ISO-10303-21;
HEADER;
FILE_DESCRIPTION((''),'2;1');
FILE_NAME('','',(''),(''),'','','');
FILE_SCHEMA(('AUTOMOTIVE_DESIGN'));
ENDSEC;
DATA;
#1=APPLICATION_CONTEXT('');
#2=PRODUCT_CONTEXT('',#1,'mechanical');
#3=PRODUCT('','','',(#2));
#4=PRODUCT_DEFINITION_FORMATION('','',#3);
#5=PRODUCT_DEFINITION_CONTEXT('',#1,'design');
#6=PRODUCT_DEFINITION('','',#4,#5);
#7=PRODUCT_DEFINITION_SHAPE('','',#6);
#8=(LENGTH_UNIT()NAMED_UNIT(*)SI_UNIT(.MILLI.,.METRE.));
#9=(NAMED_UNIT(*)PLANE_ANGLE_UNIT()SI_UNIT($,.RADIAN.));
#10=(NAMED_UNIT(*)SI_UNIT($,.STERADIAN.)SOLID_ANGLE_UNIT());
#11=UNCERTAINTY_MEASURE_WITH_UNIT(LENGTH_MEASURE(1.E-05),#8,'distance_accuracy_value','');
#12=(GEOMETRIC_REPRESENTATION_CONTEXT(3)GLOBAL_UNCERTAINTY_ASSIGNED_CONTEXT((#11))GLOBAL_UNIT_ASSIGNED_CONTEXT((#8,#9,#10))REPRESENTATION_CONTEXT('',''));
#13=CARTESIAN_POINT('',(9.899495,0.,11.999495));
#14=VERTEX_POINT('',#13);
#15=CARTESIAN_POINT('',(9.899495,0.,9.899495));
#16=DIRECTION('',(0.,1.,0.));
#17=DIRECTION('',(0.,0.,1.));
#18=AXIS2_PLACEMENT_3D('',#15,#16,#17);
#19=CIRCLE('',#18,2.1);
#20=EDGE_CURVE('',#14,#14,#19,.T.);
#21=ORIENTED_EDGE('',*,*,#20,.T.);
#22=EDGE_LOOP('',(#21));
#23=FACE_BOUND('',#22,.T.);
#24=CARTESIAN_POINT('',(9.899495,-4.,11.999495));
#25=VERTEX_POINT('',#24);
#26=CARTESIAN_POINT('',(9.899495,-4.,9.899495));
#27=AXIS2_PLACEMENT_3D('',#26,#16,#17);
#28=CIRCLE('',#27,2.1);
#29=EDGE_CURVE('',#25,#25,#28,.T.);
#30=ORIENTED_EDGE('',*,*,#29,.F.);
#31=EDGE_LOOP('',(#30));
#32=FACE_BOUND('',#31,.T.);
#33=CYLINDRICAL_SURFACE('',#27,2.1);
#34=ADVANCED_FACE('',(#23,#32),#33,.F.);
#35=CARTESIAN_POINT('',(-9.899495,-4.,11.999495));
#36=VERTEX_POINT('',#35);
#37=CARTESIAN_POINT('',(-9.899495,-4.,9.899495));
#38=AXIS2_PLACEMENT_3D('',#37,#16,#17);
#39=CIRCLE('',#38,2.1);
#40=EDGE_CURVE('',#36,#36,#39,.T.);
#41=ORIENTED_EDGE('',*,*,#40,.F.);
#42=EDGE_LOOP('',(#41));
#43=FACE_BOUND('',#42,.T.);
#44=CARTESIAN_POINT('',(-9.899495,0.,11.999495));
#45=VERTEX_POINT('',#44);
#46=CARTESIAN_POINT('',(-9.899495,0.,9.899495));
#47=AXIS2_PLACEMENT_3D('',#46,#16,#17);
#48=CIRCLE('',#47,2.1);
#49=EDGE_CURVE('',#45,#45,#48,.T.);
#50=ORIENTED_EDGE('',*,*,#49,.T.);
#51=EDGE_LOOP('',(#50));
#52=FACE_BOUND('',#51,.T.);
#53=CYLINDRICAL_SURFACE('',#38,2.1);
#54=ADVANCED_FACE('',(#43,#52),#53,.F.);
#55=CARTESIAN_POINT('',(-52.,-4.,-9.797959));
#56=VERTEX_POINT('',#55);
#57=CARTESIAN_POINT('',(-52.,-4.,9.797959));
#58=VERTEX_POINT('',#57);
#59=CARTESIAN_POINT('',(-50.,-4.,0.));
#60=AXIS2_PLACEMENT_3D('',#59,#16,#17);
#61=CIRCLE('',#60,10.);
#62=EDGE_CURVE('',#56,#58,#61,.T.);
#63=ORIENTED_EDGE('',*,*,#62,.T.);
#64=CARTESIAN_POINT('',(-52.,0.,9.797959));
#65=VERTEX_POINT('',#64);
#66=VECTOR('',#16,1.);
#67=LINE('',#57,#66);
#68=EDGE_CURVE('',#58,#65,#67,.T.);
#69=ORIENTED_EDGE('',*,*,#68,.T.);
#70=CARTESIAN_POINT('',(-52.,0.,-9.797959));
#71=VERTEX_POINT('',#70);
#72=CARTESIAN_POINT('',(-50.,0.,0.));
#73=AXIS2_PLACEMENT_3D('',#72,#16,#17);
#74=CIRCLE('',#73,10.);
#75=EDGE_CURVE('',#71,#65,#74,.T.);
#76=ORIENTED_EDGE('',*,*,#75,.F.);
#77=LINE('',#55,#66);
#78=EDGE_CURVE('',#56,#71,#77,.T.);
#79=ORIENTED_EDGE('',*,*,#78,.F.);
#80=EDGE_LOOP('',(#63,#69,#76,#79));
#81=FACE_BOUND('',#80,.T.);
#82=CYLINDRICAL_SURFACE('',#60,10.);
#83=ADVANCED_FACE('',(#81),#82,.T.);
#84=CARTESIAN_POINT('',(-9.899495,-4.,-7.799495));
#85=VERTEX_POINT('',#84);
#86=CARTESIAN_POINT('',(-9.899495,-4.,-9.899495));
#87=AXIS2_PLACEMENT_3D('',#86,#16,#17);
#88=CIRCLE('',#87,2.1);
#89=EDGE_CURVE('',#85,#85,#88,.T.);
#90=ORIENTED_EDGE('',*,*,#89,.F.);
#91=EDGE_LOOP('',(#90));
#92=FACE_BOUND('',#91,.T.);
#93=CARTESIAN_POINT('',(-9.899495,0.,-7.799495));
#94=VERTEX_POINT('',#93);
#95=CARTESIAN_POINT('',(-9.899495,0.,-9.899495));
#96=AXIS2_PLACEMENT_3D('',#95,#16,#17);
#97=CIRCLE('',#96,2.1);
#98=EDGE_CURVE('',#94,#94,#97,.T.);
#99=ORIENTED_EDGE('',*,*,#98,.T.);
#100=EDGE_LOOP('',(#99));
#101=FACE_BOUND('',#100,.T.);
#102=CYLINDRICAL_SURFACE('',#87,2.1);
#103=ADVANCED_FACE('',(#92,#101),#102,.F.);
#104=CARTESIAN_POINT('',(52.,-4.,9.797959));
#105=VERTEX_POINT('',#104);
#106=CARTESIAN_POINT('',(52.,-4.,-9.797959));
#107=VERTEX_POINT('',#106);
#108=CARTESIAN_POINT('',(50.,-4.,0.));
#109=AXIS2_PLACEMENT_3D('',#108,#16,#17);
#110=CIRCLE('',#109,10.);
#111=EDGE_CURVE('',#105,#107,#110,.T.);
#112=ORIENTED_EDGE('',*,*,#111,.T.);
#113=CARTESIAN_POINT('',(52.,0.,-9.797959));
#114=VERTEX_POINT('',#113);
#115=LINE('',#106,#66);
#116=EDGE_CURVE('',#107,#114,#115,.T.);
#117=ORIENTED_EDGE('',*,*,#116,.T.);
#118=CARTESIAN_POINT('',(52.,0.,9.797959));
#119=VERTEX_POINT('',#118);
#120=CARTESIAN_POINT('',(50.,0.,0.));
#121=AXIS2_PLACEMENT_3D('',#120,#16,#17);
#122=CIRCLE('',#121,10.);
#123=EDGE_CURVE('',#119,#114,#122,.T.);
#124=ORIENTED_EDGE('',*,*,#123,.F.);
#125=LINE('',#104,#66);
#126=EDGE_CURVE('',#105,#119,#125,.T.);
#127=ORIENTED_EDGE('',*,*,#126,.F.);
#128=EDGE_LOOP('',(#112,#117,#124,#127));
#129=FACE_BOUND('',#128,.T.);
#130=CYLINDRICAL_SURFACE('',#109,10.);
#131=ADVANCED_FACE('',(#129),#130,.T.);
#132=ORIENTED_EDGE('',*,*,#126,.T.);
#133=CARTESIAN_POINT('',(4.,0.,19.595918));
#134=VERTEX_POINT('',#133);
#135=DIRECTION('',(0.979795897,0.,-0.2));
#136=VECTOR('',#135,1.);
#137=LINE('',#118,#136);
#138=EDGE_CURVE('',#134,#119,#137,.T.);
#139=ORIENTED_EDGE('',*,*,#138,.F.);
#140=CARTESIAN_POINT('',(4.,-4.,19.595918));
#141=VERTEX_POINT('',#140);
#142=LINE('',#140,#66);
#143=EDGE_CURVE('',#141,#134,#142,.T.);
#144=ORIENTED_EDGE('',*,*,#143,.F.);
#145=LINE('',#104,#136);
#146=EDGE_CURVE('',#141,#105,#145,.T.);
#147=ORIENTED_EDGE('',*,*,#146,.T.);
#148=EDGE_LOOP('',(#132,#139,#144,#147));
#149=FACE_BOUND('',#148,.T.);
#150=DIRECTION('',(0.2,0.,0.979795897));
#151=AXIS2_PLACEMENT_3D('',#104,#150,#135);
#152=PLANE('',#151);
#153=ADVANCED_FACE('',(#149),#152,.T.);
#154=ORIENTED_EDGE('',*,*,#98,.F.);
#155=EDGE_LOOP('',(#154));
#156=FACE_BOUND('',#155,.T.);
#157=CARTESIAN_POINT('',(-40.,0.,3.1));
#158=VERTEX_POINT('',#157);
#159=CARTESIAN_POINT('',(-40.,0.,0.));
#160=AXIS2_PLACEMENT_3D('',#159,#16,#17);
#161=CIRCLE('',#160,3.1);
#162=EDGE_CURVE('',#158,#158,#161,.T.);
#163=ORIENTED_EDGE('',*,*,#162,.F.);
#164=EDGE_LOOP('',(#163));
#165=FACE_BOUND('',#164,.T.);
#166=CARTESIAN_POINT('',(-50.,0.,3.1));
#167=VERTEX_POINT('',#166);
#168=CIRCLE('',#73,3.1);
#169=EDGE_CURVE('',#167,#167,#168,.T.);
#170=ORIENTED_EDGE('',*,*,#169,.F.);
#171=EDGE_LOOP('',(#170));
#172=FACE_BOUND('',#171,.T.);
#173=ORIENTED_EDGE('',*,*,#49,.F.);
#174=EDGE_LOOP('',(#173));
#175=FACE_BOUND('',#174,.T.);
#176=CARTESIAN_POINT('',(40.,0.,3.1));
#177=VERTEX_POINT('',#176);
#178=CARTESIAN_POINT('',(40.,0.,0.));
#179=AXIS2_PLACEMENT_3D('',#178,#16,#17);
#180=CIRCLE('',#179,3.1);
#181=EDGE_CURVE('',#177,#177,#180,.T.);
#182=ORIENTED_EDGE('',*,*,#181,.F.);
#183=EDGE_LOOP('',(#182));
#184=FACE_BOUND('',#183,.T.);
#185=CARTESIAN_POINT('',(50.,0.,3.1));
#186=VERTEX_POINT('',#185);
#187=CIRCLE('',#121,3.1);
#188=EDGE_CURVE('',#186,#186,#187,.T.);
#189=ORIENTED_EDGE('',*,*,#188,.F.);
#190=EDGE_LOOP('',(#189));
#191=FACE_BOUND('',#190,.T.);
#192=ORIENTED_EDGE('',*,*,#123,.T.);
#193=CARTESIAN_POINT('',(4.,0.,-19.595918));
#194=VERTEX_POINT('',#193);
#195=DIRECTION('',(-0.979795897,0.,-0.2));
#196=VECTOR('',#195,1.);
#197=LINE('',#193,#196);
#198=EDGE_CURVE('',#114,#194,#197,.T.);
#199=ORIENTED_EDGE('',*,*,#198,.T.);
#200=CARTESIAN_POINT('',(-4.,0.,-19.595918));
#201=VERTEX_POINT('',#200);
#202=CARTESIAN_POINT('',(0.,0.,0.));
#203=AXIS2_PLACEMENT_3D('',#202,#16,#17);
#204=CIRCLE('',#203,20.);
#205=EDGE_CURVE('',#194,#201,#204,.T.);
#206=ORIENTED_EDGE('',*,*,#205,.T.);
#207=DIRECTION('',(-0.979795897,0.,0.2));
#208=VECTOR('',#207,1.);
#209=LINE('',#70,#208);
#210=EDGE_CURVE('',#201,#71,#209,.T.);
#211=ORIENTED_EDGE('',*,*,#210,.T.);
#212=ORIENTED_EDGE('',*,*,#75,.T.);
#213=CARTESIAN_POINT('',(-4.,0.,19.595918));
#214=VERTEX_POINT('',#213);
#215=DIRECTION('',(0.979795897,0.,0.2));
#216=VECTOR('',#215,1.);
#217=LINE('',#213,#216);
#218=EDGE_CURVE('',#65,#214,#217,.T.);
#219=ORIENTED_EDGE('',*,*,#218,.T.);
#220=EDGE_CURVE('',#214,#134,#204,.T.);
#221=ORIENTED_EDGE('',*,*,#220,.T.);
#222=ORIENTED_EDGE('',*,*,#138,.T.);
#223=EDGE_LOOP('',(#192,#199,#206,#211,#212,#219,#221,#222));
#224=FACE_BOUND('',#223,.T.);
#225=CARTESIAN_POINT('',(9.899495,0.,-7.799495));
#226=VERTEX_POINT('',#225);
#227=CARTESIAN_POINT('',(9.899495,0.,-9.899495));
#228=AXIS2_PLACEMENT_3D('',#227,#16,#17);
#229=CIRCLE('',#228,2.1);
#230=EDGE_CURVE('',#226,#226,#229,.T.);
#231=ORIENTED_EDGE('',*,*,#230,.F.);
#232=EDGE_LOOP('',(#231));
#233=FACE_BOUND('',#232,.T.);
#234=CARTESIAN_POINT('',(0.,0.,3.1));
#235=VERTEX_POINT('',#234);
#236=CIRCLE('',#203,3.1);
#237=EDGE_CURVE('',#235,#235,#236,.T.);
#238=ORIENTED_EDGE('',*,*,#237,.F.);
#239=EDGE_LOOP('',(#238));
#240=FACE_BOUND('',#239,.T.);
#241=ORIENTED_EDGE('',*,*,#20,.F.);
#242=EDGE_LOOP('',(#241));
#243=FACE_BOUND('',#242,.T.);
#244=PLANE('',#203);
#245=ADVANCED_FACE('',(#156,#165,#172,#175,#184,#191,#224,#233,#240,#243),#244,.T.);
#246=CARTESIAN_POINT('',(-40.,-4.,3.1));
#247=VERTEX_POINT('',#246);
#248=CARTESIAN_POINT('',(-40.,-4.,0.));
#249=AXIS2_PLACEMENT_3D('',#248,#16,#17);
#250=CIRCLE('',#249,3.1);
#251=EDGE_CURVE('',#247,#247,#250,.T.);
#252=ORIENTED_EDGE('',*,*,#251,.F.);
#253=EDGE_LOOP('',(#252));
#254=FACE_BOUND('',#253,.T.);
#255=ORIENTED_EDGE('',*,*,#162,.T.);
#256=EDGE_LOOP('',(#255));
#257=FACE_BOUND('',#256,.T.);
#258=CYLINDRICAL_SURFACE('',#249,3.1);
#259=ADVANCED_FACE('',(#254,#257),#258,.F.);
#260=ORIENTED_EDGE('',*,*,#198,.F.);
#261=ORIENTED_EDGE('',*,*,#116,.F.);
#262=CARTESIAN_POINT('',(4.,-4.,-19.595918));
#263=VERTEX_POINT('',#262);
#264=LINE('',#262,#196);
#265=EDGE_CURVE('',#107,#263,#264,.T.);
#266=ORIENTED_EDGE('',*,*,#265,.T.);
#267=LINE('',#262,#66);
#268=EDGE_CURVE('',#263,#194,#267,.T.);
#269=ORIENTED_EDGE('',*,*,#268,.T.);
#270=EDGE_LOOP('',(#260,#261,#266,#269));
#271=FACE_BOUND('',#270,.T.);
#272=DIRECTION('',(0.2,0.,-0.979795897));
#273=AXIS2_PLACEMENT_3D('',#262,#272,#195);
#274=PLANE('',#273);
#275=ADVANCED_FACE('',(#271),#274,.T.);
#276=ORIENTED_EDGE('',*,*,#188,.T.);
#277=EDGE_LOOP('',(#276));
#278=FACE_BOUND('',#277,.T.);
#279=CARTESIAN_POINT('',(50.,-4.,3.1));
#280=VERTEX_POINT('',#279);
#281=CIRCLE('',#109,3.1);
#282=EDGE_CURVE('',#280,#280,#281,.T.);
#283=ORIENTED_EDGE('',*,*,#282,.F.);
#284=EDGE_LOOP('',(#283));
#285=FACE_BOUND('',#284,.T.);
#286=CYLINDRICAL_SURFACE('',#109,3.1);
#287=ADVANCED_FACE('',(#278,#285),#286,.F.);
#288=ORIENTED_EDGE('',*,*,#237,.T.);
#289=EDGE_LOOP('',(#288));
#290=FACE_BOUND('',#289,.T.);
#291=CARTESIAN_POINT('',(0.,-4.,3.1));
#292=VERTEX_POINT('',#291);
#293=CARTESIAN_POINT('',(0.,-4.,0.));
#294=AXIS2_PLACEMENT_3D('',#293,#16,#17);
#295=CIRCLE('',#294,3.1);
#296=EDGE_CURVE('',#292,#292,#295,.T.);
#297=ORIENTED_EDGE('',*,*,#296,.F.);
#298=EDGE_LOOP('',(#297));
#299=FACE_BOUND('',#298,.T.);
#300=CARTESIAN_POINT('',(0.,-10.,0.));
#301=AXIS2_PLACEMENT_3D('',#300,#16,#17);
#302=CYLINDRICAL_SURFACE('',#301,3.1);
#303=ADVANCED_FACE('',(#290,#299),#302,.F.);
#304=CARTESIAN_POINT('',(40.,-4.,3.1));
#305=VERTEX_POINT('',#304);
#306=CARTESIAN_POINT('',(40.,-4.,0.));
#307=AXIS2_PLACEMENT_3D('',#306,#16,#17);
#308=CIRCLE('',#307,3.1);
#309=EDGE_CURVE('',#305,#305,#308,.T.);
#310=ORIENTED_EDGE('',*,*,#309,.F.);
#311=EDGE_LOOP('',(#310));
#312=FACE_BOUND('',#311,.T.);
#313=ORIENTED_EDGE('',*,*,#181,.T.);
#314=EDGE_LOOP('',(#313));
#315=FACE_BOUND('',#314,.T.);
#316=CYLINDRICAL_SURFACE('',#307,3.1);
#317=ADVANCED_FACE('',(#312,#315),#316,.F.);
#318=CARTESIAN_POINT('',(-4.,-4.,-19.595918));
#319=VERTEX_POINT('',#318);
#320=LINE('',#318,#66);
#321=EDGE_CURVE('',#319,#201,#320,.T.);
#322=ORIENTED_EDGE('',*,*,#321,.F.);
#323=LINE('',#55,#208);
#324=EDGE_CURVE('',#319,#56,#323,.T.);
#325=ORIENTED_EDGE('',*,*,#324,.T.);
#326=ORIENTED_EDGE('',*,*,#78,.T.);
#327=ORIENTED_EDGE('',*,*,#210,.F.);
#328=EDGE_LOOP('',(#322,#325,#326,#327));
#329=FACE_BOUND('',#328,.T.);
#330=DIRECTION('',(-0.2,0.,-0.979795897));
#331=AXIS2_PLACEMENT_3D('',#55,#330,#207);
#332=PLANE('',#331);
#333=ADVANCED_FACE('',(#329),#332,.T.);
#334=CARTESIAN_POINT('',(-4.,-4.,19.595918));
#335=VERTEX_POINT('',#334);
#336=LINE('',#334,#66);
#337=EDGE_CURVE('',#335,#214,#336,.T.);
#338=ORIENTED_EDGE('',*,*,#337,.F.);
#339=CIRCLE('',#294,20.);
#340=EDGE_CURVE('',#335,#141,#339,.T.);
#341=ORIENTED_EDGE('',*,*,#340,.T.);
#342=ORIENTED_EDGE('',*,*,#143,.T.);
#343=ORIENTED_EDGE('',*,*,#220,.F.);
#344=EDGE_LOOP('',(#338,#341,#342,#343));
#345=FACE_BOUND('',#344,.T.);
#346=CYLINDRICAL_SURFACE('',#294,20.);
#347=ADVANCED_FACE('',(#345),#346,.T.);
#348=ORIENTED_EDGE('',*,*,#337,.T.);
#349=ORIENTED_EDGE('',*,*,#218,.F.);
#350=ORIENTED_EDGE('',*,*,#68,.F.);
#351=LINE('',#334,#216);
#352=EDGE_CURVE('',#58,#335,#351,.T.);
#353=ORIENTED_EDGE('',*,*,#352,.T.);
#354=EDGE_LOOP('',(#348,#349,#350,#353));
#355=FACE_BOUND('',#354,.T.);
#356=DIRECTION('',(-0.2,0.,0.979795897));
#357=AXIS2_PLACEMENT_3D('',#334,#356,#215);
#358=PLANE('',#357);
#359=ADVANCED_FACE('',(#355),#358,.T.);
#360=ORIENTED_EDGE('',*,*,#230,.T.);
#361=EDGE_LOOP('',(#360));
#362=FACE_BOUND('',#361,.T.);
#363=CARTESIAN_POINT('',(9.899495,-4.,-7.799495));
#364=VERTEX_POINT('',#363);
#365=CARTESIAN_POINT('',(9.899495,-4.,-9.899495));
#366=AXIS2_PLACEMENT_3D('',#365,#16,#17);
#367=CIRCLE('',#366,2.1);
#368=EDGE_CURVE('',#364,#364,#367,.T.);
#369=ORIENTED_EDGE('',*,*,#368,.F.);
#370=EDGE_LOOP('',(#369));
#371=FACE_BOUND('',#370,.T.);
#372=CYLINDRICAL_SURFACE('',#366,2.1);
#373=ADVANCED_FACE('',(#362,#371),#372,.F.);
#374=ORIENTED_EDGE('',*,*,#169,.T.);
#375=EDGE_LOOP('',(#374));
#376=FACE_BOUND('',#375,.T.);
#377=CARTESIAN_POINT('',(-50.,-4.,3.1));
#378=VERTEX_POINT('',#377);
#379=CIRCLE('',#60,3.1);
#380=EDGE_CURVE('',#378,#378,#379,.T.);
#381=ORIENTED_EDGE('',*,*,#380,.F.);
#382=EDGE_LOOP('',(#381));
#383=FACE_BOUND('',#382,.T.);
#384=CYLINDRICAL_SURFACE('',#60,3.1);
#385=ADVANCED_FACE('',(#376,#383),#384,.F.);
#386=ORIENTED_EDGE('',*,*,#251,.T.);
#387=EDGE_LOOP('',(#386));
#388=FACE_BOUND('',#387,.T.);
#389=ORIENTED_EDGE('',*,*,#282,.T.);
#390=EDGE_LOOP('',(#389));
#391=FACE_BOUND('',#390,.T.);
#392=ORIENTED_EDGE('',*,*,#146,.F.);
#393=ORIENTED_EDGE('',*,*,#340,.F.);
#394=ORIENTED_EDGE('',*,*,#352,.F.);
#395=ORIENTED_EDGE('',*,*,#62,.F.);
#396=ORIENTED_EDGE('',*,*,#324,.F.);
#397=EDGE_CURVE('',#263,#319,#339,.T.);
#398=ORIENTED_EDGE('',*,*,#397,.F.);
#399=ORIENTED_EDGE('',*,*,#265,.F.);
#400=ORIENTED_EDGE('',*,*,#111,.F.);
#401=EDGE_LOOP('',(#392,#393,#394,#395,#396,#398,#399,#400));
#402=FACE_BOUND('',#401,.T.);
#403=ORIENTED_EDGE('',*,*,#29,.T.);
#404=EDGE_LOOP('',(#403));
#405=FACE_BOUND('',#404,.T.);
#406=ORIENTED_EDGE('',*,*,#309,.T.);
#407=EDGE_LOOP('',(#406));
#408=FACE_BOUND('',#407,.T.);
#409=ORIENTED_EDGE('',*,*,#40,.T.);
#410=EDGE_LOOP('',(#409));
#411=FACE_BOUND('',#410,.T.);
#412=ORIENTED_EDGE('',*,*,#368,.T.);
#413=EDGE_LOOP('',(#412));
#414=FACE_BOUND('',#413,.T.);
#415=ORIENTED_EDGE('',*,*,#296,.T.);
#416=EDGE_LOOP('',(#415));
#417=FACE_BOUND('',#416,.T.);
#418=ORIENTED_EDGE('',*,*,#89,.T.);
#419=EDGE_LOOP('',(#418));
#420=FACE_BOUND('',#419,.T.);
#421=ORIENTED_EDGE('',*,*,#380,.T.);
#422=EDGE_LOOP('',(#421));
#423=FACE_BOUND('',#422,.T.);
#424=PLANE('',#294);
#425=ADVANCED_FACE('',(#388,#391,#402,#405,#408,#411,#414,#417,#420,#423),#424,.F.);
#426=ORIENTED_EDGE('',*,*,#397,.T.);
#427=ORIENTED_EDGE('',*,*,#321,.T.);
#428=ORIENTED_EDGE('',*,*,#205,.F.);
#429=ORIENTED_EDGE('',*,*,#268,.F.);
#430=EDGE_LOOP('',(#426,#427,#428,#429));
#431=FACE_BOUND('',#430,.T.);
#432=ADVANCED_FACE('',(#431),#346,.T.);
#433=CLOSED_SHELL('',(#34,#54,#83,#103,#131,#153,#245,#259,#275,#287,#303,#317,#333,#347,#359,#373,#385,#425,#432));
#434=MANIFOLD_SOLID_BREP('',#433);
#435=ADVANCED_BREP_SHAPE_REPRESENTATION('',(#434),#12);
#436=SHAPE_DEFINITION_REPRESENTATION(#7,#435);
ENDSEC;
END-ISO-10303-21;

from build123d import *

# Parameters (mm, degrees)
SKETCH_1_R             = 2.1
SKETCH_1_R_2           = 3.1
SM_BASE_FLANGE_1_DEPTH = 4
SKETCH_6_R             = 3.1
CUT_EXTRUDE_1_DEPTH    = 10


# Sheet-metal steps are written as plain solids
with BuildPart() as part:
    # Sketch 1 → Базовая кромка1 (new body)
    with BuildSketch(Plane(origin=(0, 0, 0), x_dir=(1, 0, 0), z_dir=(0, 1, 0))):
        with BuildLine():
            Line((-52, 9.797958971), (-4, 19.595917942))
            ThreePointArc((-4, 19.595917942), (0, 20), (4, 19.595917942))
            Line((4, 19.595917942), (52, 9.797958971))
            ThreePointArc((52, 9.797958971), (60, 0), (52, -9.797958971))
            Line((52, -9.797958971), (4, -19.595917942))
            ThreePointArc((4, -19.595917942), (0, -20), (-4, -19.595917942))
            Line((-4, -19.595917942), (-52, -9.797958971))
            ThreePointArc((-52, -9.797958971), (-60, 0), (-52, 9.797958971))
        make_face()
        with Locations(Location((9.899494937, 9.899494937, 0), (0, 0, 270))):
            Circle(SKETCH_1_R, mode=Mode.SUBTRACT)
        with Locations(Location((9.899494937, -9.899494937, 0), (0, 0, 270))):
            Circle(SKETCH_1_R, mode=Mode.SUBTRACT)
        with Locations(Location((-9.899494937, -9.899494937, 0), (0, 0, 270))):
            Circle(SKETCH_1_R, mode=Mode.SUBTRACT)
        with Locations(Location((-9.899494937, 9.899494937, 0), (0, 0, 270))):
            Circle(SKETCH_1_R, mode=Mode.SUBTRACT)
        with Locations(Location((50, 0, 0), (0, 0, 270))):
            Circle(SKETCH_1_R_2, mode=Mode.SUBTRACT)
        with Locations(Location((-50, 0, 0), (0, 0, 270))):
            Circle(SKETCH_1_R_2, mode=Mode.SUBTRACT)
        with Locations(Location((-40, 0, 0), (0, 0, 270))):
            Circle(SKETCH_1_R_2, mode=Mode.SUBTRACT)
        with Locations(Location((40, 0, 0), (0, 0, 270))):
            Circle(SKETCH_1_R_2, mode=Mode.SUBTRACT)
    extrude(amount=-SM_BASE_FLANGE_1_DEPTH)

    # Эскиз6 → Вырез-Вытянуть1 (cut)
    with BuildSketch(Plane(origin=(0, 0, 0), x_dir=(1, 0, 0), z_dir=(0, 1, 0))):
        with Locations(Location((0, 0, 0), (0, 0, 270))):
            Circle(SKETCH_6_R)
    extrude(amount=-CUT_EXTRUDE_1_DEPTH, mode=Mode.SUBTRACT)


solid = part.part
